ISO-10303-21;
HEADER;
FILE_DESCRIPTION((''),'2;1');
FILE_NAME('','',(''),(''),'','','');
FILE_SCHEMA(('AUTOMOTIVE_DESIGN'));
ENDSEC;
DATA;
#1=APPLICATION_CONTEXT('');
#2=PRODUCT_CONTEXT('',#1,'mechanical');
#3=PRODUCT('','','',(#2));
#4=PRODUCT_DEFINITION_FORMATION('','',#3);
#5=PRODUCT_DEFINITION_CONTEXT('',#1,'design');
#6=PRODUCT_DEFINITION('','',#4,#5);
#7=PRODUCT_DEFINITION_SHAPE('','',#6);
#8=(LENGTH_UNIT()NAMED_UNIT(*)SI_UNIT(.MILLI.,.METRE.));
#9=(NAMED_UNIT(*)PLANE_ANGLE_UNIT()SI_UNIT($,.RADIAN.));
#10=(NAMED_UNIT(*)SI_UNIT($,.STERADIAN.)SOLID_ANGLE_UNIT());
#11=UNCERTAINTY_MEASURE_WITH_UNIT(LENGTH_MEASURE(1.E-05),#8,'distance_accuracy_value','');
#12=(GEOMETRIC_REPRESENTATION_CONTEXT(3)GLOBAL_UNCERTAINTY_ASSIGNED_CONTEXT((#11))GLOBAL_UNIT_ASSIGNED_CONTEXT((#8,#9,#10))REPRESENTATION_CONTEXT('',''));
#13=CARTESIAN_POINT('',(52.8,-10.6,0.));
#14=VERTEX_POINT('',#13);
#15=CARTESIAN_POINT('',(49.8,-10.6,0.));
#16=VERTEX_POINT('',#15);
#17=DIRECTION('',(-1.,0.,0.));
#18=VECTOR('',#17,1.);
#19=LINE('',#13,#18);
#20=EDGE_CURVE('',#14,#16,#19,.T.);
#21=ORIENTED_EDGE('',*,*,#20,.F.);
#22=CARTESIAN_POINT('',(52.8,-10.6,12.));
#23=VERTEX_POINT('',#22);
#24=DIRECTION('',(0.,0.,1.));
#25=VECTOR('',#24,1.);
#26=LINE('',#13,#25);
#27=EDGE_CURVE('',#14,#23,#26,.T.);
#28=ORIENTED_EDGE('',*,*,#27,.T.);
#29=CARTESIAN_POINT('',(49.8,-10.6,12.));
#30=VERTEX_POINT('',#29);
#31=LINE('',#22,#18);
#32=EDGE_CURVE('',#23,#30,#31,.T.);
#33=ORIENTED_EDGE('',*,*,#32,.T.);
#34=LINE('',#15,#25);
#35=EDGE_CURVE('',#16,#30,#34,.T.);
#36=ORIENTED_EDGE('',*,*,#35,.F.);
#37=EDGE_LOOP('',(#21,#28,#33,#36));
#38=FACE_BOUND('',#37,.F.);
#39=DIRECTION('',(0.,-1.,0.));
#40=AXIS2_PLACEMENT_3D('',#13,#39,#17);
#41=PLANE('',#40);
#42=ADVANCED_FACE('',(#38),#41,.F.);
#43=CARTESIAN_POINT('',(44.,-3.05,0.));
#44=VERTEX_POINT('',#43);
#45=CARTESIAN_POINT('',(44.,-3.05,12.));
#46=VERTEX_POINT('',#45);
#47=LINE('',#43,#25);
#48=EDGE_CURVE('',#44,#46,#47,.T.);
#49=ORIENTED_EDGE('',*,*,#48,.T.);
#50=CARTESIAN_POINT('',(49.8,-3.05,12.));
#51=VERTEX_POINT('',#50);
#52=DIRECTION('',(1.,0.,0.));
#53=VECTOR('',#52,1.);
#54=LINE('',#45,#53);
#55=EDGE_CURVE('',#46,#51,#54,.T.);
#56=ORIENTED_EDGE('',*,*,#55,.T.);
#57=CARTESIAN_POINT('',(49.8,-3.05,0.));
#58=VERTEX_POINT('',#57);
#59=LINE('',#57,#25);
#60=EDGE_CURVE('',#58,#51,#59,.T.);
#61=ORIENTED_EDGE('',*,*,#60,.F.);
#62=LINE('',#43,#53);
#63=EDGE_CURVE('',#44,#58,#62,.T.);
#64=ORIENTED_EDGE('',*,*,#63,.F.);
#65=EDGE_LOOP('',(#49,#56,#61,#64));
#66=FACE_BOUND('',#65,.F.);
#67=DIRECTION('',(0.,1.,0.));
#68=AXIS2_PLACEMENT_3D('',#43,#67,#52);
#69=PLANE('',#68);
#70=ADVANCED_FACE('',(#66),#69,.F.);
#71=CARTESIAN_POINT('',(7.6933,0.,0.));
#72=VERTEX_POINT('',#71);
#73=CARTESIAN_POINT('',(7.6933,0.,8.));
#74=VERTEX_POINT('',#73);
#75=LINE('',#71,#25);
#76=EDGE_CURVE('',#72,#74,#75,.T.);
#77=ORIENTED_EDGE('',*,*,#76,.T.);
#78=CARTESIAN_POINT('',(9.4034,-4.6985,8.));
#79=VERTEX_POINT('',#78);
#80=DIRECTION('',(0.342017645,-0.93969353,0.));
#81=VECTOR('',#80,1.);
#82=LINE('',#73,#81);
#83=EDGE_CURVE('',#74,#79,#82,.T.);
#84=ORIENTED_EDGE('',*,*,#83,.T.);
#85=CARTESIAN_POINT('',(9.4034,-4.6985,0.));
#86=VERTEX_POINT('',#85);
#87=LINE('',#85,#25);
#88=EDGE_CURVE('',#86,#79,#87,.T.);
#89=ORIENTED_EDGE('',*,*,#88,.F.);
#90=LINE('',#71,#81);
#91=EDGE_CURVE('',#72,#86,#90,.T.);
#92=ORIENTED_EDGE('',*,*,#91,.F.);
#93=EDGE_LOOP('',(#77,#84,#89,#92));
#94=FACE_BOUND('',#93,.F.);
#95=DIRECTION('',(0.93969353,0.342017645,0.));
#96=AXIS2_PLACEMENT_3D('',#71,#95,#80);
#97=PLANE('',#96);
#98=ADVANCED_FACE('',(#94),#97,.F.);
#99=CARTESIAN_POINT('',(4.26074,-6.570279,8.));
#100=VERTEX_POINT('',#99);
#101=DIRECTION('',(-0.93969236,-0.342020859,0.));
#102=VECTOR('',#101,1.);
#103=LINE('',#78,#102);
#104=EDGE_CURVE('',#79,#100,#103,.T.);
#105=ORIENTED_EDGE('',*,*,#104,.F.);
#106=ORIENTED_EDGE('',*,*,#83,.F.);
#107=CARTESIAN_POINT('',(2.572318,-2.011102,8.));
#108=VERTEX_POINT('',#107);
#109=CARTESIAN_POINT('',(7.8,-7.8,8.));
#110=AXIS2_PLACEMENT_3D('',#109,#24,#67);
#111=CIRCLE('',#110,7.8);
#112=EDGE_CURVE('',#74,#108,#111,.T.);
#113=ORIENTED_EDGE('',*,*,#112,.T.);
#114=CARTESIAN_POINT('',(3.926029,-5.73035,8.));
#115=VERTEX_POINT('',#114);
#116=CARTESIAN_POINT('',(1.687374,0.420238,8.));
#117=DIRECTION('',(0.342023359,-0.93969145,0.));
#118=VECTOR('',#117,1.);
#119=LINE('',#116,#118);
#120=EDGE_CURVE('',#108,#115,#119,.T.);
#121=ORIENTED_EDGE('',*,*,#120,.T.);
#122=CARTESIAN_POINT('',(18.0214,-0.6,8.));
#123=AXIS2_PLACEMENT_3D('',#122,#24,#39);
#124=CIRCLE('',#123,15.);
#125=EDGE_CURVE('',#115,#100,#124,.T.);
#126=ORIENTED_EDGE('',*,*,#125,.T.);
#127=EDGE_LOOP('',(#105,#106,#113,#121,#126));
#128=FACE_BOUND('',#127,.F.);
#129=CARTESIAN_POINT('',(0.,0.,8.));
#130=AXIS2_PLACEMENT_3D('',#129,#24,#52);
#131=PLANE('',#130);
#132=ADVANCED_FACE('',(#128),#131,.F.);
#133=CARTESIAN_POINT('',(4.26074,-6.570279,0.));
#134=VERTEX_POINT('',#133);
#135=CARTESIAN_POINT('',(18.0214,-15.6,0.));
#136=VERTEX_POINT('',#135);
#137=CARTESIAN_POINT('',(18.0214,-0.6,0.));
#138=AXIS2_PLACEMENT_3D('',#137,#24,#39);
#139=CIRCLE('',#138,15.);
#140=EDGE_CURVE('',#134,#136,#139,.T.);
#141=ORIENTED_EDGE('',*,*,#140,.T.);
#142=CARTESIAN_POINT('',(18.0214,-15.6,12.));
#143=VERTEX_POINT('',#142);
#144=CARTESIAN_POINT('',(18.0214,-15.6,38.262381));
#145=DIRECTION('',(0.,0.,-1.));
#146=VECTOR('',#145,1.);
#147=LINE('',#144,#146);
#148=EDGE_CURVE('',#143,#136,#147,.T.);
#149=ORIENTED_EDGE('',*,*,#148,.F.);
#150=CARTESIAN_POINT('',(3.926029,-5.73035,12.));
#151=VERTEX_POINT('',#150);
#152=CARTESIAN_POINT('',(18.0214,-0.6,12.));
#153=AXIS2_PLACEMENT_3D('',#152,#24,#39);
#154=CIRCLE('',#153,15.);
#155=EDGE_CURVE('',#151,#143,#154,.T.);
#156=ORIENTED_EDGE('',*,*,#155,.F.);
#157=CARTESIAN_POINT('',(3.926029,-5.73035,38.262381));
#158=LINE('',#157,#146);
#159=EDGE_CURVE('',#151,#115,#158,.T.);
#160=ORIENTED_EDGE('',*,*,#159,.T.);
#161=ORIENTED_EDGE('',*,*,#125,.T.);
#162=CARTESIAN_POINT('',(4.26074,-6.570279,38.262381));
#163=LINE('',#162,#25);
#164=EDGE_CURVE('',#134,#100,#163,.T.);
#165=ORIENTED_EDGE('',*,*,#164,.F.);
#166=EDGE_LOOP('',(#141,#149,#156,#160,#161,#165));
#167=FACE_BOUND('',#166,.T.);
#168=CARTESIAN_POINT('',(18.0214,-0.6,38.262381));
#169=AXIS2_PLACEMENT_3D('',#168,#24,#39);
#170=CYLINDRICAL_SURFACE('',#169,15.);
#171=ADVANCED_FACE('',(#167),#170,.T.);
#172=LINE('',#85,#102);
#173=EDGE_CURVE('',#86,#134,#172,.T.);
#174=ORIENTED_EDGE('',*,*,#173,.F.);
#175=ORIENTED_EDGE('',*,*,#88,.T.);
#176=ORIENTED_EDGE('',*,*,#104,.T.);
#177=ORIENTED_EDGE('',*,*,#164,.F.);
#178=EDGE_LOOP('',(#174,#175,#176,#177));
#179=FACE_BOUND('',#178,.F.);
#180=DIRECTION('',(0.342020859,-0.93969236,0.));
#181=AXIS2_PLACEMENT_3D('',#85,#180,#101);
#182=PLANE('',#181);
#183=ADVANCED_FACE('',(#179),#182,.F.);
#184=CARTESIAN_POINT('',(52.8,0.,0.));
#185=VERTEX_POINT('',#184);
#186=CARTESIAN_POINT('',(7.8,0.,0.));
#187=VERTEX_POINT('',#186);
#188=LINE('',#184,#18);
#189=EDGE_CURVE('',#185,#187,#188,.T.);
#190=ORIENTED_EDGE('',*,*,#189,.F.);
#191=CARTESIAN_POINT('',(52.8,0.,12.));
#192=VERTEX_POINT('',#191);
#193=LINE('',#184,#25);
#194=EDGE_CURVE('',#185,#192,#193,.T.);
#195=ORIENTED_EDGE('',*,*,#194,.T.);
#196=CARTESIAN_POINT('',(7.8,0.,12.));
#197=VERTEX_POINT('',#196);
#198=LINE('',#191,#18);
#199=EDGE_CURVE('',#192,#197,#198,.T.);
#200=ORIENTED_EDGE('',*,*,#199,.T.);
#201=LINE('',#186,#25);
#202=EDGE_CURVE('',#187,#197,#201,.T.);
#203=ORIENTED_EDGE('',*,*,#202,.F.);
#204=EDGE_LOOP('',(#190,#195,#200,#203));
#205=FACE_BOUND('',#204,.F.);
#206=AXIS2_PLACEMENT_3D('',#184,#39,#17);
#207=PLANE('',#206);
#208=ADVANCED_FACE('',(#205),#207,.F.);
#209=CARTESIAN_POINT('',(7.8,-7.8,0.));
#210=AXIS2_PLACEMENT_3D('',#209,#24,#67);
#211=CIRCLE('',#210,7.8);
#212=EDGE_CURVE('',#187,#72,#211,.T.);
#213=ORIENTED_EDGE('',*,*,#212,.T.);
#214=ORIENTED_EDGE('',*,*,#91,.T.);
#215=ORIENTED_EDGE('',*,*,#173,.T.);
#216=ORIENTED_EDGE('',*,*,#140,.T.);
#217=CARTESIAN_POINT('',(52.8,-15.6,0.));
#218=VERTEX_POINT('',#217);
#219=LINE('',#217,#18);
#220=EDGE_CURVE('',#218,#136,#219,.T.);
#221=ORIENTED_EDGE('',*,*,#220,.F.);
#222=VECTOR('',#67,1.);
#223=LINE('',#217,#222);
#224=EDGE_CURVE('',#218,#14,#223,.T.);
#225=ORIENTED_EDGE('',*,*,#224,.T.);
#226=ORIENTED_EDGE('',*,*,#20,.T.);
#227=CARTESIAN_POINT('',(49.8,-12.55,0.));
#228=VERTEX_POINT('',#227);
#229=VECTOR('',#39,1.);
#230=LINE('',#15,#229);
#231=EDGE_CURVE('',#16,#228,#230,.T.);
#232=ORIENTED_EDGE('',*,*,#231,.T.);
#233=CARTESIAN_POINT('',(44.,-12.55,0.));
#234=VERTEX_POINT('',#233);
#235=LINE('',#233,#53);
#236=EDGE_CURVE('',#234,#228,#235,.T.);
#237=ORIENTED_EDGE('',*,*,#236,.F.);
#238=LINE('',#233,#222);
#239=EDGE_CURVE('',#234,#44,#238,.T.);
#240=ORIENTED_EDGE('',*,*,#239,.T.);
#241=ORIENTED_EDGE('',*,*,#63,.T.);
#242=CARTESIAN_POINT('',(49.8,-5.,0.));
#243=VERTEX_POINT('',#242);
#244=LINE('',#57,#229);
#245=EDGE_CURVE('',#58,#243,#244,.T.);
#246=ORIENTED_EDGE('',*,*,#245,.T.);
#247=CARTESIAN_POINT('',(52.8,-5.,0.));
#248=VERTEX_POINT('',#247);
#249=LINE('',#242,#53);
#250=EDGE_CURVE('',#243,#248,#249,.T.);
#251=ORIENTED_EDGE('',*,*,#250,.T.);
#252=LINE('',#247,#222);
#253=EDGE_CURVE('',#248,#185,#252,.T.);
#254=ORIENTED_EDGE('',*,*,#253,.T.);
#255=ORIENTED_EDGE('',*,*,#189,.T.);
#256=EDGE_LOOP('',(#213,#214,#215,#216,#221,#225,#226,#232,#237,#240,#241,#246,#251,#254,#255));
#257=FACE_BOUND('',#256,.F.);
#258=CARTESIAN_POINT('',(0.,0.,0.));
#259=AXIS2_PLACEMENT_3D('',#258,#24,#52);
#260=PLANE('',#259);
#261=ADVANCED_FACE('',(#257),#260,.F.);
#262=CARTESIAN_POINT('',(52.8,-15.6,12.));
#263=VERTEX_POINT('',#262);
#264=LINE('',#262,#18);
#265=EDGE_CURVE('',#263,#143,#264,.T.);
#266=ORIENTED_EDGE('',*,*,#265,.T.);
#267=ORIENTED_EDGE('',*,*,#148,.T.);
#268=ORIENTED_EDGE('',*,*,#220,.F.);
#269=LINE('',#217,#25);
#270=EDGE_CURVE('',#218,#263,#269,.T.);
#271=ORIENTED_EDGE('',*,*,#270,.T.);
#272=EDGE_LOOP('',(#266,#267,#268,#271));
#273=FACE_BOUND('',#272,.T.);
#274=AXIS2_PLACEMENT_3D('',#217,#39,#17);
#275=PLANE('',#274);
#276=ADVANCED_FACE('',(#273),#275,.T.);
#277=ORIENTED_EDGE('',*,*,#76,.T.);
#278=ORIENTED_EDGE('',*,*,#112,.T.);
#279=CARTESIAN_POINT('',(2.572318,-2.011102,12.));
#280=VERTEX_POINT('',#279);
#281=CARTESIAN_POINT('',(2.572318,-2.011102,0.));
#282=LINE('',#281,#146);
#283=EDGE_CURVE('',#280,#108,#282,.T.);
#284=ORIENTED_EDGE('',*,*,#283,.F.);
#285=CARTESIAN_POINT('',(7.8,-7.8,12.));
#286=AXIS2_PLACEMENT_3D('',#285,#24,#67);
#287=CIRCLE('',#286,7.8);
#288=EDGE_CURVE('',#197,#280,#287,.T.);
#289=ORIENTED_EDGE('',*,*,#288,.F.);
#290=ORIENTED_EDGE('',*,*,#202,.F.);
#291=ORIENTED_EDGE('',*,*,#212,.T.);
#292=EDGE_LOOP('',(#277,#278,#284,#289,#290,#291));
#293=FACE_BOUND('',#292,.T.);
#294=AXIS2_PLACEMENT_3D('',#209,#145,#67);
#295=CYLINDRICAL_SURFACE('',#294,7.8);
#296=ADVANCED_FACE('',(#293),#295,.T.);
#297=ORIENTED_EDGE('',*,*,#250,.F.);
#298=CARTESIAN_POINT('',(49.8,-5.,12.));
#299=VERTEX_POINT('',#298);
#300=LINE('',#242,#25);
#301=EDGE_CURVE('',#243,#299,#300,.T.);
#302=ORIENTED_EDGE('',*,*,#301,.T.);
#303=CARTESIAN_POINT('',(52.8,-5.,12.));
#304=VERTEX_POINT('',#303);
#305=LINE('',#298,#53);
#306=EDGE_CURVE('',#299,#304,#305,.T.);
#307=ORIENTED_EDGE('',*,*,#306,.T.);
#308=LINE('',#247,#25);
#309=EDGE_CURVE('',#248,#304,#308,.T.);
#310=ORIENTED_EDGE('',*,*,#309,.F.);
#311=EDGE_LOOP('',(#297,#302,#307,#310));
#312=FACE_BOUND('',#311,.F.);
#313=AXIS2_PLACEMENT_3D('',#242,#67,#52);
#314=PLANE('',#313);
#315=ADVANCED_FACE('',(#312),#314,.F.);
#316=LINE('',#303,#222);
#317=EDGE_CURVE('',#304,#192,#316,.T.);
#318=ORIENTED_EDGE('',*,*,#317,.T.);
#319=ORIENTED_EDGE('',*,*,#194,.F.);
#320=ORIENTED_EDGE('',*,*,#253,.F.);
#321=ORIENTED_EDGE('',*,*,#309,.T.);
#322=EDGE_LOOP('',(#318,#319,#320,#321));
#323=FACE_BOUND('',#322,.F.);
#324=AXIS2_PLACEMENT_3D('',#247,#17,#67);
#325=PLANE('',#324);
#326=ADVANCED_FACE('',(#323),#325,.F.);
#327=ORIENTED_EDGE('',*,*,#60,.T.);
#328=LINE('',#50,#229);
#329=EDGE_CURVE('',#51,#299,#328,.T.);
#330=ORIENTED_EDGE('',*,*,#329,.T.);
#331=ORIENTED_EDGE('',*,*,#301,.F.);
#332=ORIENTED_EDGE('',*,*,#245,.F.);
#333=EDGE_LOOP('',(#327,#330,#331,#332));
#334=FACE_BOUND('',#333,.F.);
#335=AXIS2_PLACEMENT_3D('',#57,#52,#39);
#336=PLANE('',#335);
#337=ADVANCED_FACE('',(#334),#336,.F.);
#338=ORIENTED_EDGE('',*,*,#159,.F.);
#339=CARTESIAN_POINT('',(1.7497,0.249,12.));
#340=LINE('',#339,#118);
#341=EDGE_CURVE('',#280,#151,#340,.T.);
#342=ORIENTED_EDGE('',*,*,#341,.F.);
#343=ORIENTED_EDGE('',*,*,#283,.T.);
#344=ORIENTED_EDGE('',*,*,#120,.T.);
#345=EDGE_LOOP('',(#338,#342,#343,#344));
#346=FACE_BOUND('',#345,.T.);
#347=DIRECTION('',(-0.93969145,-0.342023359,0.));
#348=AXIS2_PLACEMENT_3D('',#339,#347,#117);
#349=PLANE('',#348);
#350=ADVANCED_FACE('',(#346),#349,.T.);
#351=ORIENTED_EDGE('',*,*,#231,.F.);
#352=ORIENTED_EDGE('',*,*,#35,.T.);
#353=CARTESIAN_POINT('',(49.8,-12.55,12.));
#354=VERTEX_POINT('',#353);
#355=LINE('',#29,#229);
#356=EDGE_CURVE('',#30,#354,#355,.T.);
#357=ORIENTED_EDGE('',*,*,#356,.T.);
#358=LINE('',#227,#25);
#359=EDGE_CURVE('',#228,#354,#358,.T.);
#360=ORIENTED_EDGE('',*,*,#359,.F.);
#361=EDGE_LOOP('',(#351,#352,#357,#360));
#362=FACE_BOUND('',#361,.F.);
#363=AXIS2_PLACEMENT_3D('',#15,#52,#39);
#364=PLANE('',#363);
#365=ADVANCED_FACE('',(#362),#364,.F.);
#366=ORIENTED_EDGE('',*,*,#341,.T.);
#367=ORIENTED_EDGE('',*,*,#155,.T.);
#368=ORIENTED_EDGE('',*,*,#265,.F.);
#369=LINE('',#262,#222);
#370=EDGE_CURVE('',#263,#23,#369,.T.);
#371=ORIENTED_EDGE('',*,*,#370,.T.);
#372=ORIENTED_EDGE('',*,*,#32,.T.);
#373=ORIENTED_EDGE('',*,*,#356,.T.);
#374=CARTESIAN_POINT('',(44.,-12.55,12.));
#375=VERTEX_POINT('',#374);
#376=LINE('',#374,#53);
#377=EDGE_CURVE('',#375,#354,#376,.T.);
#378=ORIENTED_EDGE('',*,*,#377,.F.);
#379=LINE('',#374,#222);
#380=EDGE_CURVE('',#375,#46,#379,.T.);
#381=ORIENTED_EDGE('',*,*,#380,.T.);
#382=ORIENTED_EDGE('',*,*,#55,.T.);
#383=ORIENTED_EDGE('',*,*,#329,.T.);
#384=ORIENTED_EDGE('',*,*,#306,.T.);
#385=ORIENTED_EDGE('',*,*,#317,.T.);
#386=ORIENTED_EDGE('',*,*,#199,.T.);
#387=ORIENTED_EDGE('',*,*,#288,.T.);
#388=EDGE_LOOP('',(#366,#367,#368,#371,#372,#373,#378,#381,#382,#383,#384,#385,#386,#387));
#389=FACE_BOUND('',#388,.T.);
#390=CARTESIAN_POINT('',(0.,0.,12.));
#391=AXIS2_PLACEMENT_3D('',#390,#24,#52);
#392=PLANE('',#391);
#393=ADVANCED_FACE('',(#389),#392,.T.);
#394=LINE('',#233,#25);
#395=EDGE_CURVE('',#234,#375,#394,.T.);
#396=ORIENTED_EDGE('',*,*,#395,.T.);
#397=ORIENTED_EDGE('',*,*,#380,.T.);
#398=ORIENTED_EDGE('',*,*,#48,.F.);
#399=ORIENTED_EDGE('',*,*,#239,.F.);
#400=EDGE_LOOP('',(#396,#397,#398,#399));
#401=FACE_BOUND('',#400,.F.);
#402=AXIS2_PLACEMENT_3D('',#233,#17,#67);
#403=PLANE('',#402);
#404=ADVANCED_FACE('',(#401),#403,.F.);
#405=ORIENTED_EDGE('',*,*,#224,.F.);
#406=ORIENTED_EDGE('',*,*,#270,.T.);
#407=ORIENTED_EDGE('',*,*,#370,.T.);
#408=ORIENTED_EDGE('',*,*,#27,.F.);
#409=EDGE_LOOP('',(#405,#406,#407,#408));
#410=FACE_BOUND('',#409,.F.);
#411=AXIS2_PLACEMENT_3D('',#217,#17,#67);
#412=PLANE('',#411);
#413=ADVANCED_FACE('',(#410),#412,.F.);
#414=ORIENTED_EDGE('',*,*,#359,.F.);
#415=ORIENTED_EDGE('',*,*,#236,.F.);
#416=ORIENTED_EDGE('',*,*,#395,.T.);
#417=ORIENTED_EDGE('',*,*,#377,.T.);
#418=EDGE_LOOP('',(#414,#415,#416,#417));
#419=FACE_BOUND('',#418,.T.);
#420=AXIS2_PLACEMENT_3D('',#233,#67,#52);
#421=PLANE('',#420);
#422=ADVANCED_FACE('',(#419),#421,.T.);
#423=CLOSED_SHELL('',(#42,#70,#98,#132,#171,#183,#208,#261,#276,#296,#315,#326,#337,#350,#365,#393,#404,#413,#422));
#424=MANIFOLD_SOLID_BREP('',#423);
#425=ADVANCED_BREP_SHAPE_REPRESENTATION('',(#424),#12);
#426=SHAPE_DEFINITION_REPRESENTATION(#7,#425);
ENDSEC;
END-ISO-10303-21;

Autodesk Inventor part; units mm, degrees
ref_plane "YZ Plane" through (0, 0, 0) normal (1, 0, 0) x (0, 1, 0)
ref_plane "XZ Plane" through (0, 0, 0) normal (0, 1, 0) x (-1, 0, 0)
ref_plane "XY Plane" through (0, 0, 0) normal (0, 0, 1) x (1, 0, 0)
sketch "Sketch5" plane through (0, 0, 0) normal (0, 0, 1) x (1, 0, 0)
  line L0 (52.8, -15.6) -> (52.8, -10.6)
  line L1 (52.8, -10.6) -> (49.8, -10.6)
  line L2 (49.8, -10.6) -> (49.8, -12.55)
  line L3 (44, -12.55) -> (44, -3.05)
  line L4 (49.8, -3.05) -> (49.8, -5)
  line L5 (49.8, -5) -> (52.8, -5)
  line L6 (52.8, -5) -> (52.8, 0)
  line L7 (52.8, 0) -> (7.8, 0)
  line L8 (44, -3.05) -> (49.8, -3.05)
  line L9 (44, -12.55) -> (49.8, -12.55)
  line L10 (52.8, -15.6) -> (7.8, -15.6)
  arc A0 (7.8, 0) -> (7.8, -15.6) centre (7.8, -7.8) ccw
  point P0 (0, 0)
  dimension "d41" = 5.8
  dimension "d48" = 44
  dimension "d63" = 45
  dimension "d67" = 15.6
  dimension "d71" = 0
  dimension "d72" = 36.2
  dimension "d85" = 5.6
  dimension "d86" = 9.5
  dimension "d87" = 3
extrude "Extrusion2" add sketch "Sketch5" along normal blind 12
sketch "Sketch9" plane through (0, 0, 12) normal (0, 0, 1) x (1, 0, 0)
  line L0 (52.8, 0) -> (7.8, 0) projected
  line L1 (7.6933, 0) -> (9.4034, -4.6985)
  line L2 (9.4034, -4.6985) -> (0.0065, -8.1187)
  arc A0 (7.8, 0) -> (7.8, -15.6) centre (7.8, -7.8) ccw projected
  point P0 (0, 0)
  point P1 (7.6936, -0.0007)
  dimension "d89" = 5
  dimension "d92" = 110
  dimension "d93" = 10
extrude "Extrusion6" cut sketch "Sketch9" along normal blind 8 from surface at -12
sketch "Sketch11" plane through (0, 0, 12) normal (0, 0, 1) x (1, 0, 0)
  line L0 (1.7497, 0.249) -> (7.6768, -16.0354)
  line L1 (7.6768, -16.0354) -> (-2.2601, -19.6521)
  line L2 (-2.2601, -19.6521) -> (-8.1871, -3.3677)
  line L3 (-8.1871, -3.3677) -> (1.7497, 0.249)
  line L4 (7.6936, -0.0007) -> (9.4034, -4.6985) projected
  point P0 (0, 0)
  dimension "d98" = 5.5
extrude "Extrusion8" cut sketch "Sketch11" against normal through all
fillet "Fillet2" radius 15 1 edges at (7.5164, -15.5948, 6)
sketch "Sketch12" plane through (0, 0, 12) normal (0, 0, 1) x (1, 0, 0)
  point P0 (0, 0)
equation "\"l1\" = 8"
properties part number "Finray_test_8_Kerbe_20deg_V4_links"
